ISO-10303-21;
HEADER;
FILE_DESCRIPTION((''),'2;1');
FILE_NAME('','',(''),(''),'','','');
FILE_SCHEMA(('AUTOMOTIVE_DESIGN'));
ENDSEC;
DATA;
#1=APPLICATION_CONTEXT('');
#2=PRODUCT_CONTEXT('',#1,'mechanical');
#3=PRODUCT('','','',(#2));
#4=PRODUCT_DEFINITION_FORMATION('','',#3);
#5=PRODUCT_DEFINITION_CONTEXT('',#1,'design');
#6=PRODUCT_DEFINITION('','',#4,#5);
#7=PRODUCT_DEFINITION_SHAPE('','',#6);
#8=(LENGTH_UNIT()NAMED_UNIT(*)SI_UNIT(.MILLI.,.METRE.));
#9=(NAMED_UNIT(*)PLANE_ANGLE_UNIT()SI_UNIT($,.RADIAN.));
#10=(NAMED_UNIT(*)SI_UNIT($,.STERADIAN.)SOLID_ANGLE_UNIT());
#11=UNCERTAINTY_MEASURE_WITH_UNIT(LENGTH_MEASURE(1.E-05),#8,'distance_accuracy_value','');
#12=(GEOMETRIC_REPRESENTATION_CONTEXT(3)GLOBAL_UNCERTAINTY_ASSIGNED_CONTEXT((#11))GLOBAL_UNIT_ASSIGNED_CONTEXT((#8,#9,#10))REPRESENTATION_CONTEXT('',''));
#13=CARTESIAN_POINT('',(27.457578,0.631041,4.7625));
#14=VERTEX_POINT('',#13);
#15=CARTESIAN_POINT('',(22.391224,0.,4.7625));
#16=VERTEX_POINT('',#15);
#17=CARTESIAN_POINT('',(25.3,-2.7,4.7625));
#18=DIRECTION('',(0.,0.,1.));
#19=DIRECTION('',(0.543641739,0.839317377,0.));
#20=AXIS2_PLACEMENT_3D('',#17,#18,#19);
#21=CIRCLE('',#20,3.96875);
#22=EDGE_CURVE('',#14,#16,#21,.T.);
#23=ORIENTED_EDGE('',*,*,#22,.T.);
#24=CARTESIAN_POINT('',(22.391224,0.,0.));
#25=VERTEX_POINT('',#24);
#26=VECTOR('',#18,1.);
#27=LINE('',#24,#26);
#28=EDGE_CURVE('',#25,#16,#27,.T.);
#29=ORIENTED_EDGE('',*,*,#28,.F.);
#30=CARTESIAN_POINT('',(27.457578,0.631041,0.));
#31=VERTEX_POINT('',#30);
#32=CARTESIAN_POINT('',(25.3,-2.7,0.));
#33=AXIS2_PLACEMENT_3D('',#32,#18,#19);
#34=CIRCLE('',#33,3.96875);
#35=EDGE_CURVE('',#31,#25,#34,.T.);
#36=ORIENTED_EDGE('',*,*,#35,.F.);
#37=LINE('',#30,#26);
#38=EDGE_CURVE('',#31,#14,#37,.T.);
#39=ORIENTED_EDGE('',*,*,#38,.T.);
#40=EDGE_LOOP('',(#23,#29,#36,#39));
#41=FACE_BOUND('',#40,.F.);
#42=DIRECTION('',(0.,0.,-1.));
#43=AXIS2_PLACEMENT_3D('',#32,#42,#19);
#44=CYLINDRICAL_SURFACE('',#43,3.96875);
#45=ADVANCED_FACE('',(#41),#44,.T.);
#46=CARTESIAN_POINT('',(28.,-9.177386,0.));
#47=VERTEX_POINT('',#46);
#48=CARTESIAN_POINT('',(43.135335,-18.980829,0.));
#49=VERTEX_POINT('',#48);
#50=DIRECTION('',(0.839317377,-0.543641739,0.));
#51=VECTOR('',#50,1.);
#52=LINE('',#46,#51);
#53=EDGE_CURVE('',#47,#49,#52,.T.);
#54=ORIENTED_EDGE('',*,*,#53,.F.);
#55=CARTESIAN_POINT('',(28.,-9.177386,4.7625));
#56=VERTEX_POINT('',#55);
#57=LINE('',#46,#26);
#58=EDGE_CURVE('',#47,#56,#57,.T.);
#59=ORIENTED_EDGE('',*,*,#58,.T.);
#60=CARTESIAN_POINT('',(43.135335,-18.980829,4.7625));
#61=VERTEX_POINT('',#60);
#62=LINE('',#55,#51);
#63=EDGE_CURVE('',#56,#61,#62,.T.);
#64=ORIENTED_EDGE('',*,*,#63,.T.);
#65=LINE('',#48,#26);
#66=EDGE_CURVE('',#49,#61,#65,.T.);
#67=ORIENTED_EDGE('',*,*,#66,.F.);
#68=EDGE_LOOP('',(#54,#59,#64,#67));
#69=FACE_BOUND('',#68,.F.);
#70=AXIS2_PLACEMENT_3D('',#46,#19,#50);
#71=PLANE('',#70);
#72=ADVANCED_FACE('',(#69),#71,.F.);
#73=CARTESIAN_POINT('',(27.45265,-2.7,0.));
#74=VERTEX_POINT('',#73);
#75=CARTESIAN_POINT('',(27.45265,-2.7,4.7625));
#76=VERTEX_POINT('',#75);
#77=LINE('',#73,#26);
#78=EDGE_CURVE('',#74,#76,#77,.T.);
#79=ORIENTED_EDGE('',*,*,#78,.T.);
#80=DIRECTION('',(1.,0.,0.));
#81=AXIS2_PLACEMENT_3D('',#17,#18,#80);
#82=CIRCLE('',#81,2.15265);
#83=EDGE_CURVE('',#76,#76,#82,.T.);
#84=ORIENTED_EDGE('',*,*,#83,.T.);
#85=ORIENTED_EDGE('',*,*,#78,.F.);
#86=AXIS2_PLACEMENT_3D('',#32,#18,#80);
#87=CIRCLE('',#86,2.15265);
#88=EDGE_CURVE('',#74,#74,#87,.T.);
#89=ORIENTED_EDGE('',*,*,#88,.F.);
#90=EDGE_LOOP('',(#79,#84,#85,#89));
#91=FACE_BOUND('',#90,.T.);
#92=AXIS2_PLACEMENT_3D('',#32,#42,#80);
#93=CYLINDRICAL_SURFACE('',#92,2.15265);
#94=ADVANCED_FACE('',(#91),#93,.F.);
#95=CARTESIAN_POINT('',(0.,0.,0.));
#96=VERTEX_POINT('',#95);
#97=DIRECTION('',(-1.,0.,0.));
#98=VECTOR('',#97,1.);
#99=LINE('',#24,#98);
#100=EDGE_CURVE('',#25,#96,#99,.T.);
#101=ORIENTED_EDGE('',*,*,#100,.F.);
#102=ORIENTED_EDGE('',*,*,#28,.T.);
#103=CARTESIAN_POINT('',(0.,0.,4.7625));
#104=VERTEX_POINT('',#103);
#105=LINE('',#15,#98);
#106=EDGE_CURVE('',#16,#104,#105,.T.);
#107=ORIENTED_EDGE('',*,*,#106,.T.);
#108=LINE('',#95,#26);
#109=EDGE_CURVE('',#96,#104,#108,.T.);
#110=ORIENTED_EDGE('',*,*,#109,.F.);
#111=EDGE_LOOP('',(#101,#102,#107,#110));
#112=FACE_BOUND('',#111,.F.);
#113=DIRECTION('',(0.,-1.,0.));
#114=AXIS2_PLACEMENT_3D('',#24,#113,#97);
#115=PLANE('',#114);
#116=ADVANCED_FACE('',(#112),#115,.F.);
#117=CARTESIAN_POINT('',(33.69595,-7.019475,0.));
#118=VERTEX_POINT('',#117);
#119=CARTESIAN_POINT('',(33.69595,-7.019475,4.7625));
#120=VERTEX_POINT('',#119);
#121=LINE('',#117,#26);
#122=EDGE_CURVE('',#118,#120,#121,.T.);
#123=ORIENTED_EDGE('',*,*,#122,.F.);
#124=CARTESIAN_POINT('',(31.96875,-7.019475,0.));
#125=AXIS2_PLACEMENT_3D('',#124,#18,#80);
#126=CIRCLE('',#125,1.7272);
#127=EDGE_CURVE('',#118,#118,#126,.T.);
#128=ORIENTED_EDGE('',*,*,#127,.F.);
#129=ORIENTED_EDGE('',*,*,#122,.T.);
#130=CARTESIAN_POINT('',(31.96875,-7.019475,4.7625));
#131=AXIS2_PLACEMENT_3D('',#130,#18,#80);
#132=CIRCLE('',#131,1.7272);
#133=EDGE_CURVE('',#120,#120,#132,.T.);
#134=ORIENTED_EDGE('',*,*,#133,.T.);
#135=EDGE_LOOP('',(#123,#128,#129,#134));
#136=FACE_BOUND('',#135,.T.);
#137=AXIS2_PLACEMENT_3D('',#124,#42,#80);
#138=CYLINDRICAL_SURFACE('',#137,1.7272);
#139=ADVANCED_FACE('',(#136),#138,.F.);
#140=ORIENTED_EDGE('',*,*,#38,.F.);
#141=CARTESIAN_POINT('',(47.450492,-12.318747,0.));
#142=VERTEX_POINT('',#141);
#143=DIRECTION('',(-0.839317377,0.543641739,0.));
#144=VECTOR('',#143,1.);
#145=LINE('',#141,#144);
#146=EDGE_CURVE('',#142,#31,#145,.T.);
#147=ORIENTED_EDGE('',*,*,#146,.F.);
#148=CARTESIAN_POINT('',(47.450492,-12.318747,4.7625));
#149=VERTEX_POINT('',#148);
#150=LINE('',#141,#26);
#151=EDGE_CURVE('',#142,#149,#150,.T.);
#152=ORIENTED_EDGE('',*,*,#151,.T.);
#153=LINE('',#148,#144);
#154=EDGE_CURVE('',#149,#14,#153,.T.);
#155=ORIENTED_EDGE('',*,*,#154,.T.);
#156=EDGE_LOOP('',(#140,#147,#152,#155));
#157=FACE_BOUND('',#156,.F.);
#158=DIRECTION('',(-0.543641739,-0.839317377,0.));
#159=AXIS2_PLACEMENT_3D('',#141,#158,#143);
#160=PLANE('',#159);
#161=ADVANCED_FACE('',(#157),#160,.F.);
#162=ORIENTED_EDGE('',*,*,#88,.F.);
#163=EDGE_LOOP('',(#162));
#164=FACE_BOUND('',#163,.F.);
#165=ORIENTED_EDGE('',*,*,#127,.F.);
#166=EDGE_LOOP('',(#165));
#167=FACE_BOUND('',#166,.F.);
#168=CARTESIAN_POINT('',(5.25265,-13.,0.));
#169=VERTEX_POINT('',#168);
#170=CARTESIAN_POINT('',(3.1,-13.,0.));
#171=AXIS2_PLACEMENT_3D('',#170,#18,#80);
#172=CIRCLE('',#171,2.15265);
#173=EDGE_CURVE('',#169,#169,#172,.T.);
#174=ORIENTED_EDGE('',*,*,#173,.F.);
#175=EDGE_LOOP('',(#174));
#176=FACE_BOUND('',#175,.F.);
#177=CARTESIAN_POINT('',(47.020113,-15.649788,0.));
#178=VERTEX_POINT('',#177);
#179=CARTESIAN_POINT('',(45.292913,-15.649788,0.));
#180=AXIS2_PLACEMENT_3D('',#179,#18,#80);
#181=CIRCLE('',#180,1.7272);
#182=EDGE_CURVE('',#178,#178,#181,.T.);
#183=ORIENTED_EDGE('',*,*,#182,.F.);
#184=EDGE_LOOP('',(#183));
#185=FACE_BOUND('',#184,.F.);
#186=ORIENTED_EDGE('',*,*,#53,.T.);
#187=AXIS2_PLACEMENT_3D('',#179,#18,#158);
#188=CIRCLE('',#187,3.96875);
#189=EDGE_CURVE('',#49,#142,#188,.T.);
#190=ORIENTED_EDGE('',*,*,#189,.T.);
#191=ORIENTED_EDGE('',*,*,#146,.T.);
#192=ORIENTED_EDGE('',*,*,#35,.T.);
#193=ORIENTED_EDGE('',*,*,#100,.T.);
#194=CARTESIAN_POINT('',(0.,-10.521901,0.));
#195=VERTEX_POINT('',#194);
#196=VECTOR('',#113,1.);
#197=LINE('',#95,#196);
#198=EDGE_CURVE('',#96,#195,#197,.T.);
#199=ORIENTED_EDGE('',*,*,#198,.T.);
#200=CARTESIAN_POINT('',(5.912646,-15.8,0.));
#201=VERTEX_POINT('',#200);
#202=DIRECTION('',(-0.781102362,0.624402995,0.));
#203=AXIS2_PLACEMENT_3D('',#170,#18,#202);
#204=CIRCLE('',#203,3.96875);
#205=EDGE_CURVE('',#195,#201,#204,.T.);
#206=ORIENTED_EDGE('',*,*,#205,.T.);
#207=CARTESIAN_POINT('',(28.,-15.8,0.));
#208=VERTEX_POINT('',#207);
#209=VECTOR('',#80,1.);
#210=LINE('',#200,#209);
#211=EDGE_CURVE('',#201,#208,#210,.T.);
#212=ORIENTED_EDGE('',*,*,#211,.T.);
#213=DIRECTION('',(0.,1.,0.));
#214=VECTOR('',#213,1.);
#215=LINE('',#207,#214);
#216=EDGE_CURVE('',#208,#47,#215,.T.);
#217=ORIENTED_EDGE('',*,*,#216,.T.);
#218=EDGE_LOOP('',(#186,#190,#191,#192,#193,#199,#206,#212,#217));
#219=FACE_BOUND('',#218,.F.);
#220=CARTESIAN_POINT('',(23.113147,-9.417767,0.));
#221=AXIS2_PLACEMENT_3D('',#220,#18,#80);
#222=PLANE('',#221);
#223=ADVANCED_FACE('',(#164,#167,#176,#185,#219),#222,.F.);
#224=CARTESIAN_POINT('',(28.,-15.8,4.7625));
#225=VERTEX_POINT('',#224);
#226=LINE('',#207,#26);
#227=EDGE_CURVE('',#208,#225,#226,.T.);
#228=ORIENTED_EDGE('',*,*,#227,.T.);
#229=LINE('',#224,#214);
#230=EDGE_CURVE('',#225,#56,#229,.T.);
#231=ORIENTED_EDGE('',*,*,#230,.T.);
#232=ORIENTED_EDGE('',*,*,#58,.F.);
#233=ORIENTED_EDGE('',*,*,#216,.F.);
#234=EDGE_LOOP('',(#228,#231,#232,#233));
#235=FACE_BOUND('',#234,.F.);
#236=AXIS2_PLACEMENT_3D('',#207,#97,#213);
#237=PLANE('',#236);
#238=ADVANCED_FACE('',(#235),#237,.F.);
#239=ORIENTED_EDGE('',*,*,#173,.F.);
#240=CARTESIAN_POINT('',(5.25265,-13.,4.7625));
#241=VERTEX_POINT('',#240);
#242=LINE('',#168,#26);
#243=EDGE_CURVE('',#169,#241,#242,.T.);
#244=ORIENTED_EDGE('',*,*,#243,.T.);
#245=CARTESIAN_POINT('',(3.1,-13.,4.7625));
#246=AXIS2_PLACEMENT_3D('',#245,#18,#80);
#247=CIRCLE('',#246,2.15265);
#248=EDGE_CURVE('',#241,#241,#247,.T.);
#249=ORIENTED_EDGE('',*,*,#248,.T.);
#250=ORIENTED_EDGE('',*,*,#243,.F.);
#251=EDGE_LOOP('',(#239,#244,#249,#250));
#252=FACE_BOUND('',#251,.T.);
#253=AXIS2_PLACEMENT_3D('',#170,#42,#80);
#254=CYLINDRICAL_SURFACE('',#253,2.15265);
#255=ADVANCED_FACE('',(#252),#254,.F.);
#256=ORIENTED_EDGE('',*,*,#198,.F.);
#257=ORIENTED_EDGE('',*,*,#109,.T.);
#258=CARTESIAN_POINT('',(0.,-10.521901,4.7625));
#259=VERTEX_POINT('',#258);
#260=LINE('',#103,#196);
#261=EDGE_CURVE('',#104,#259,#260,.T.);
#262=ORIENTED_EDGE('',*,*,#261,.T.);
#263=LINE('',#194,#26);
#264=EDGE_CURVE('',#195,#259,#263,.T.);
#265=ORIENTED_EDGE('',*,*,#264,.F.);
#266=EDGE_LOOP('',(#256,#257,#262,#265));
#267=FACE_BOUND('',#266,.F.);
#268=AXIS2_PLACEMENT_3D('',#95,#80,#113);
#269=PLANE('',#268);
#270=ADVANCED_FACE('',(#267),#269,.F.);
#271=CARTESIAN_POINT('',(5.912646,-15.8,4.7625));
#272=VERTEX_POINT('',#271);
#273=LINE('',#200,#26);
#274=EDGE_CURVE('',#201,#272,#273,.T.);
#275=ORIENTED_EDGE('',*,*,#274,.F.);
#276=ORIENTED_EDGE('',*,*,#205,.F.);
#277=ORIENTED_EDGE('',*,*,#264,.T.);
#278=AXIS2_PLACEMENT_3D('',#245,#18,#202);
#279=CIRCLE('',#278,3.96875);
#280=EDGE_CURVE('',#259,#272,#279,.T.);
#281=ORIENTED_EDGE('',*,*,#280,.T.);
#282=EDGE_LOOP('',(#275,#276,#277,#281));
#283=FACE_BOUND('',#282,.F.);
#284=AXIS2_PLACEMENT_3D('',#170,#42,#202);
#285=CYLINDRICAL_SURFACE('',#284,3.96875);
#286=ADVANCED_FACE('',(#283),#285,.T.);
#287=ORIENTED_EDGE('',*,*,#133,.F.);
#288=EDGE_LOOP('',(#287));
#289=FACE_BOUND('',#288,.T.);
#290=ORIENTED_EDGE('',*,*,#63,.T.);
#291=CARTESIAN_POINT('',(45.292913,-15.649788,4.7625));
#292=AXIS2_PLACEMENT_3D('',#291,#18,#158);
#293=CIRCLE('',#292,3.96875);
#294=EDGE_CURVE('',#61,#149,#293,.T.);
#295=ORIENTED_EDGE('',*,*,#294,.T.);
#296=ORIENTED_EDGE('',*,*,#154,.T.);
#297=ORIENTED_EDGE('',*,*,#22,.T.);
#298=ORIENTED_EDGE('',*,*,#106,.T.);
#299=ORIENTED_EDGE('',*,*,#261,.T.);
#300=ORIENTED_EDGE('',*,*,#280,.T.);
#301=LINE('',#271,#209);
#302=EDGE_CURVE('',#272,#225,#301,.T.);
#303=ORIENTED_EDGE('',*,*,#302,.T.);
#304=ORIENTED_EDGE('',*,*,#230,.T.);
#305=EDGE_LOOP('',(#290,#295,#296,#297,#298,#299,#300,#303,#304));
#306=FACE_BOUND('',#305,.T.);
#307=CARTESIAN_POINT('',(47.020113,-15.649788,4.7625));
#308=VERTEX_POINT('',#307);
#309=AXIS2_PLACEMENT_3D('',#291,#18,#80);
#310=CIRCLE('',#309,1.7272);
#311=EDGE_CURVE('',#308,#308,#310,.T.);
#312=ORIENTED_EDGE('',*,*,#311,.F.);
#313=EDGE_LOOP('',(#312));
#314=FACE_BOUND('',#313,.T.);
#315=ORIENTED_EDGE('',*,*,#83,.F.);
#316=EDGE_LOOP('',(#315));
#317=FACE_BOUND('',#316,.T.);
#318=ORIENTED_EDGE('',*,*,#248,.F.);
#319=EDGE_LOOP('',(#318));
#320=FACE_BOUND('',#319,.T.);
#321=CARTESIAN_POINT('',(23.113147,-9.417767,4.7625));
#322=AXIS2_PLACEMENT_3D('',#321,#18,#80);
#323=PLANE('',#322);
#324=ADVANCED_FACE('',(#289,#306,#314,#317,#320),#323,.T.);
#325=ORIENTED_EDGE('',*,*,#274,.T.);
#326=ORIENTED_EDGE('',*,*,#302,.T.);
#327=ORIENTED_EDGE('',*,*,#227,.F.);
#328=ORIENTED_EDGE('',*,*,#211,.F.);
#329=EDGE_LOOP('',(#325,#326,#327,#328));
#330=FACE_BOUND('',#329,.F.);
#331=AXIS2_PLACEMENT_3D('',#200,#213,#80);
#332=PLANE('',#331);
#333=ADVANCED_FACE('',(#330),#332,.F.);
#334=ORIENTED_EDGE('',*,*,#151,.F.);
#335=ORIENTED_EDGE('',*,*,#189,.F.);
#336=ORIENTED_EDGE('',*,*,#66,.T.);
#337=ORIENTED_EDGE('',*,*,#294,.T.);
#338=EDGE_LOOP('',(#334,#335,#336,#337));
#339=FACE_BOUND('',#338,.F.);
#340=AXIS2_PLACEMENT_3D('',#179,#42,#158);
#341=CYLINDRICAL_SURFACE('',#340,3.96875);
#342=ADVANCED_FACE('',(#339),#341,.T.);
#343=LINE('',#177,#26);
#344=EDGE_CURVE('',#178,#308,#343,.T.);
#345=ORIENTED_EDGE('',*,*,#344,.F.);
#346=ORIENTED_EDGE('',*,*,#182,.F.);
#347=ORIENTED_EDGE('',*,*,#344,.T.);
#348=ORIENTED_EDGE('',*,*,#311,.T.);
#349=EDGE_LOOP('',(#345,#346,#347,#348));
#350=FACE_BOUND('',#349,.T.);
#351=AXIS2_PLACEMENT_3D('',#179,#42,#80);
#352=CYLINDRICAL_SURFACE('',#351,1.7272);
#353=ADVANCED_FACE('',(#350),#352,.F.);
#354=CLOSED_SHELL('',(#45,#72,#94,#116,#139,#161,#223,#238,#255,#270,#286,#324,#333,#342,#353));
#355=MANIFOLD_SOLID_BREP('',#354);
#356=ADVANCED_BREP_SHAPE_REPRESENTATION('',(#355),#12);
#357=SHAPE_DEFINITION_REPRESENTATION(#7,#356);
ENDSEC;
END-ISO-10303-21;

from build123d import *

# Parameters (mm, degrees)
F0_R     = 2.15265
F0_R_2   = 1.7272
F1_DEPTH = 4.7625


# Not quite as in the source:
# - a feature names something its author has since deleted; it is built from what else it names


with BuildPart() as f1:
    # F0 (on Top) → F1 (new body)
    with BuildSketch(Plane.XY):
        with BuildLine():
            Line((22.3912242158, 0), (0, 0))
            Line((0, 0), (0, -10.5219006149))
            ThreePointArc((0, -10.5219006149), (0.4570421145, -15.9607009606), (5.9126458296, -15.8))
            Line((5.9126458296, -15.8), (28, -15.8))
            Line((28, -15.8), (28, -9.1773860778))
            Line((28, -9.1773860778), (43.1353352142, -18.980828941))
            ThreePointArc((43.1353352142, -18.980828941), (48.6239542062, -17.8073662506), (47.4504915157, -12.3187472586))
            Line((47.4504915157, -12.3187472586), (27.4575781507, 0.6310408412))
            ThreePointArc((27.4575781507, 0.6310408412), (24.809461921, 1.2383180364), (22.3912242158, 0))
        make_face()
        with Locations((3.1, -13)):
            Circle(F0_R, mode=Mode.SUBTRACT)
        with Locations((45.2929133649, -15.6497880998)):
            Circle(F0_R_2, mode=Mode.SUBTRACT)
        with Locations((31.96875, -7.0194754969)):
            Circle(F0_R_2, mode=Mode.SUBTRACT)
        with Locations((25.3, -2.7)):
            Circle(F0_R, mode=Mode.SUBTRACT)
    extrude(amount=F1_DEPTH)


solid = f1.part
